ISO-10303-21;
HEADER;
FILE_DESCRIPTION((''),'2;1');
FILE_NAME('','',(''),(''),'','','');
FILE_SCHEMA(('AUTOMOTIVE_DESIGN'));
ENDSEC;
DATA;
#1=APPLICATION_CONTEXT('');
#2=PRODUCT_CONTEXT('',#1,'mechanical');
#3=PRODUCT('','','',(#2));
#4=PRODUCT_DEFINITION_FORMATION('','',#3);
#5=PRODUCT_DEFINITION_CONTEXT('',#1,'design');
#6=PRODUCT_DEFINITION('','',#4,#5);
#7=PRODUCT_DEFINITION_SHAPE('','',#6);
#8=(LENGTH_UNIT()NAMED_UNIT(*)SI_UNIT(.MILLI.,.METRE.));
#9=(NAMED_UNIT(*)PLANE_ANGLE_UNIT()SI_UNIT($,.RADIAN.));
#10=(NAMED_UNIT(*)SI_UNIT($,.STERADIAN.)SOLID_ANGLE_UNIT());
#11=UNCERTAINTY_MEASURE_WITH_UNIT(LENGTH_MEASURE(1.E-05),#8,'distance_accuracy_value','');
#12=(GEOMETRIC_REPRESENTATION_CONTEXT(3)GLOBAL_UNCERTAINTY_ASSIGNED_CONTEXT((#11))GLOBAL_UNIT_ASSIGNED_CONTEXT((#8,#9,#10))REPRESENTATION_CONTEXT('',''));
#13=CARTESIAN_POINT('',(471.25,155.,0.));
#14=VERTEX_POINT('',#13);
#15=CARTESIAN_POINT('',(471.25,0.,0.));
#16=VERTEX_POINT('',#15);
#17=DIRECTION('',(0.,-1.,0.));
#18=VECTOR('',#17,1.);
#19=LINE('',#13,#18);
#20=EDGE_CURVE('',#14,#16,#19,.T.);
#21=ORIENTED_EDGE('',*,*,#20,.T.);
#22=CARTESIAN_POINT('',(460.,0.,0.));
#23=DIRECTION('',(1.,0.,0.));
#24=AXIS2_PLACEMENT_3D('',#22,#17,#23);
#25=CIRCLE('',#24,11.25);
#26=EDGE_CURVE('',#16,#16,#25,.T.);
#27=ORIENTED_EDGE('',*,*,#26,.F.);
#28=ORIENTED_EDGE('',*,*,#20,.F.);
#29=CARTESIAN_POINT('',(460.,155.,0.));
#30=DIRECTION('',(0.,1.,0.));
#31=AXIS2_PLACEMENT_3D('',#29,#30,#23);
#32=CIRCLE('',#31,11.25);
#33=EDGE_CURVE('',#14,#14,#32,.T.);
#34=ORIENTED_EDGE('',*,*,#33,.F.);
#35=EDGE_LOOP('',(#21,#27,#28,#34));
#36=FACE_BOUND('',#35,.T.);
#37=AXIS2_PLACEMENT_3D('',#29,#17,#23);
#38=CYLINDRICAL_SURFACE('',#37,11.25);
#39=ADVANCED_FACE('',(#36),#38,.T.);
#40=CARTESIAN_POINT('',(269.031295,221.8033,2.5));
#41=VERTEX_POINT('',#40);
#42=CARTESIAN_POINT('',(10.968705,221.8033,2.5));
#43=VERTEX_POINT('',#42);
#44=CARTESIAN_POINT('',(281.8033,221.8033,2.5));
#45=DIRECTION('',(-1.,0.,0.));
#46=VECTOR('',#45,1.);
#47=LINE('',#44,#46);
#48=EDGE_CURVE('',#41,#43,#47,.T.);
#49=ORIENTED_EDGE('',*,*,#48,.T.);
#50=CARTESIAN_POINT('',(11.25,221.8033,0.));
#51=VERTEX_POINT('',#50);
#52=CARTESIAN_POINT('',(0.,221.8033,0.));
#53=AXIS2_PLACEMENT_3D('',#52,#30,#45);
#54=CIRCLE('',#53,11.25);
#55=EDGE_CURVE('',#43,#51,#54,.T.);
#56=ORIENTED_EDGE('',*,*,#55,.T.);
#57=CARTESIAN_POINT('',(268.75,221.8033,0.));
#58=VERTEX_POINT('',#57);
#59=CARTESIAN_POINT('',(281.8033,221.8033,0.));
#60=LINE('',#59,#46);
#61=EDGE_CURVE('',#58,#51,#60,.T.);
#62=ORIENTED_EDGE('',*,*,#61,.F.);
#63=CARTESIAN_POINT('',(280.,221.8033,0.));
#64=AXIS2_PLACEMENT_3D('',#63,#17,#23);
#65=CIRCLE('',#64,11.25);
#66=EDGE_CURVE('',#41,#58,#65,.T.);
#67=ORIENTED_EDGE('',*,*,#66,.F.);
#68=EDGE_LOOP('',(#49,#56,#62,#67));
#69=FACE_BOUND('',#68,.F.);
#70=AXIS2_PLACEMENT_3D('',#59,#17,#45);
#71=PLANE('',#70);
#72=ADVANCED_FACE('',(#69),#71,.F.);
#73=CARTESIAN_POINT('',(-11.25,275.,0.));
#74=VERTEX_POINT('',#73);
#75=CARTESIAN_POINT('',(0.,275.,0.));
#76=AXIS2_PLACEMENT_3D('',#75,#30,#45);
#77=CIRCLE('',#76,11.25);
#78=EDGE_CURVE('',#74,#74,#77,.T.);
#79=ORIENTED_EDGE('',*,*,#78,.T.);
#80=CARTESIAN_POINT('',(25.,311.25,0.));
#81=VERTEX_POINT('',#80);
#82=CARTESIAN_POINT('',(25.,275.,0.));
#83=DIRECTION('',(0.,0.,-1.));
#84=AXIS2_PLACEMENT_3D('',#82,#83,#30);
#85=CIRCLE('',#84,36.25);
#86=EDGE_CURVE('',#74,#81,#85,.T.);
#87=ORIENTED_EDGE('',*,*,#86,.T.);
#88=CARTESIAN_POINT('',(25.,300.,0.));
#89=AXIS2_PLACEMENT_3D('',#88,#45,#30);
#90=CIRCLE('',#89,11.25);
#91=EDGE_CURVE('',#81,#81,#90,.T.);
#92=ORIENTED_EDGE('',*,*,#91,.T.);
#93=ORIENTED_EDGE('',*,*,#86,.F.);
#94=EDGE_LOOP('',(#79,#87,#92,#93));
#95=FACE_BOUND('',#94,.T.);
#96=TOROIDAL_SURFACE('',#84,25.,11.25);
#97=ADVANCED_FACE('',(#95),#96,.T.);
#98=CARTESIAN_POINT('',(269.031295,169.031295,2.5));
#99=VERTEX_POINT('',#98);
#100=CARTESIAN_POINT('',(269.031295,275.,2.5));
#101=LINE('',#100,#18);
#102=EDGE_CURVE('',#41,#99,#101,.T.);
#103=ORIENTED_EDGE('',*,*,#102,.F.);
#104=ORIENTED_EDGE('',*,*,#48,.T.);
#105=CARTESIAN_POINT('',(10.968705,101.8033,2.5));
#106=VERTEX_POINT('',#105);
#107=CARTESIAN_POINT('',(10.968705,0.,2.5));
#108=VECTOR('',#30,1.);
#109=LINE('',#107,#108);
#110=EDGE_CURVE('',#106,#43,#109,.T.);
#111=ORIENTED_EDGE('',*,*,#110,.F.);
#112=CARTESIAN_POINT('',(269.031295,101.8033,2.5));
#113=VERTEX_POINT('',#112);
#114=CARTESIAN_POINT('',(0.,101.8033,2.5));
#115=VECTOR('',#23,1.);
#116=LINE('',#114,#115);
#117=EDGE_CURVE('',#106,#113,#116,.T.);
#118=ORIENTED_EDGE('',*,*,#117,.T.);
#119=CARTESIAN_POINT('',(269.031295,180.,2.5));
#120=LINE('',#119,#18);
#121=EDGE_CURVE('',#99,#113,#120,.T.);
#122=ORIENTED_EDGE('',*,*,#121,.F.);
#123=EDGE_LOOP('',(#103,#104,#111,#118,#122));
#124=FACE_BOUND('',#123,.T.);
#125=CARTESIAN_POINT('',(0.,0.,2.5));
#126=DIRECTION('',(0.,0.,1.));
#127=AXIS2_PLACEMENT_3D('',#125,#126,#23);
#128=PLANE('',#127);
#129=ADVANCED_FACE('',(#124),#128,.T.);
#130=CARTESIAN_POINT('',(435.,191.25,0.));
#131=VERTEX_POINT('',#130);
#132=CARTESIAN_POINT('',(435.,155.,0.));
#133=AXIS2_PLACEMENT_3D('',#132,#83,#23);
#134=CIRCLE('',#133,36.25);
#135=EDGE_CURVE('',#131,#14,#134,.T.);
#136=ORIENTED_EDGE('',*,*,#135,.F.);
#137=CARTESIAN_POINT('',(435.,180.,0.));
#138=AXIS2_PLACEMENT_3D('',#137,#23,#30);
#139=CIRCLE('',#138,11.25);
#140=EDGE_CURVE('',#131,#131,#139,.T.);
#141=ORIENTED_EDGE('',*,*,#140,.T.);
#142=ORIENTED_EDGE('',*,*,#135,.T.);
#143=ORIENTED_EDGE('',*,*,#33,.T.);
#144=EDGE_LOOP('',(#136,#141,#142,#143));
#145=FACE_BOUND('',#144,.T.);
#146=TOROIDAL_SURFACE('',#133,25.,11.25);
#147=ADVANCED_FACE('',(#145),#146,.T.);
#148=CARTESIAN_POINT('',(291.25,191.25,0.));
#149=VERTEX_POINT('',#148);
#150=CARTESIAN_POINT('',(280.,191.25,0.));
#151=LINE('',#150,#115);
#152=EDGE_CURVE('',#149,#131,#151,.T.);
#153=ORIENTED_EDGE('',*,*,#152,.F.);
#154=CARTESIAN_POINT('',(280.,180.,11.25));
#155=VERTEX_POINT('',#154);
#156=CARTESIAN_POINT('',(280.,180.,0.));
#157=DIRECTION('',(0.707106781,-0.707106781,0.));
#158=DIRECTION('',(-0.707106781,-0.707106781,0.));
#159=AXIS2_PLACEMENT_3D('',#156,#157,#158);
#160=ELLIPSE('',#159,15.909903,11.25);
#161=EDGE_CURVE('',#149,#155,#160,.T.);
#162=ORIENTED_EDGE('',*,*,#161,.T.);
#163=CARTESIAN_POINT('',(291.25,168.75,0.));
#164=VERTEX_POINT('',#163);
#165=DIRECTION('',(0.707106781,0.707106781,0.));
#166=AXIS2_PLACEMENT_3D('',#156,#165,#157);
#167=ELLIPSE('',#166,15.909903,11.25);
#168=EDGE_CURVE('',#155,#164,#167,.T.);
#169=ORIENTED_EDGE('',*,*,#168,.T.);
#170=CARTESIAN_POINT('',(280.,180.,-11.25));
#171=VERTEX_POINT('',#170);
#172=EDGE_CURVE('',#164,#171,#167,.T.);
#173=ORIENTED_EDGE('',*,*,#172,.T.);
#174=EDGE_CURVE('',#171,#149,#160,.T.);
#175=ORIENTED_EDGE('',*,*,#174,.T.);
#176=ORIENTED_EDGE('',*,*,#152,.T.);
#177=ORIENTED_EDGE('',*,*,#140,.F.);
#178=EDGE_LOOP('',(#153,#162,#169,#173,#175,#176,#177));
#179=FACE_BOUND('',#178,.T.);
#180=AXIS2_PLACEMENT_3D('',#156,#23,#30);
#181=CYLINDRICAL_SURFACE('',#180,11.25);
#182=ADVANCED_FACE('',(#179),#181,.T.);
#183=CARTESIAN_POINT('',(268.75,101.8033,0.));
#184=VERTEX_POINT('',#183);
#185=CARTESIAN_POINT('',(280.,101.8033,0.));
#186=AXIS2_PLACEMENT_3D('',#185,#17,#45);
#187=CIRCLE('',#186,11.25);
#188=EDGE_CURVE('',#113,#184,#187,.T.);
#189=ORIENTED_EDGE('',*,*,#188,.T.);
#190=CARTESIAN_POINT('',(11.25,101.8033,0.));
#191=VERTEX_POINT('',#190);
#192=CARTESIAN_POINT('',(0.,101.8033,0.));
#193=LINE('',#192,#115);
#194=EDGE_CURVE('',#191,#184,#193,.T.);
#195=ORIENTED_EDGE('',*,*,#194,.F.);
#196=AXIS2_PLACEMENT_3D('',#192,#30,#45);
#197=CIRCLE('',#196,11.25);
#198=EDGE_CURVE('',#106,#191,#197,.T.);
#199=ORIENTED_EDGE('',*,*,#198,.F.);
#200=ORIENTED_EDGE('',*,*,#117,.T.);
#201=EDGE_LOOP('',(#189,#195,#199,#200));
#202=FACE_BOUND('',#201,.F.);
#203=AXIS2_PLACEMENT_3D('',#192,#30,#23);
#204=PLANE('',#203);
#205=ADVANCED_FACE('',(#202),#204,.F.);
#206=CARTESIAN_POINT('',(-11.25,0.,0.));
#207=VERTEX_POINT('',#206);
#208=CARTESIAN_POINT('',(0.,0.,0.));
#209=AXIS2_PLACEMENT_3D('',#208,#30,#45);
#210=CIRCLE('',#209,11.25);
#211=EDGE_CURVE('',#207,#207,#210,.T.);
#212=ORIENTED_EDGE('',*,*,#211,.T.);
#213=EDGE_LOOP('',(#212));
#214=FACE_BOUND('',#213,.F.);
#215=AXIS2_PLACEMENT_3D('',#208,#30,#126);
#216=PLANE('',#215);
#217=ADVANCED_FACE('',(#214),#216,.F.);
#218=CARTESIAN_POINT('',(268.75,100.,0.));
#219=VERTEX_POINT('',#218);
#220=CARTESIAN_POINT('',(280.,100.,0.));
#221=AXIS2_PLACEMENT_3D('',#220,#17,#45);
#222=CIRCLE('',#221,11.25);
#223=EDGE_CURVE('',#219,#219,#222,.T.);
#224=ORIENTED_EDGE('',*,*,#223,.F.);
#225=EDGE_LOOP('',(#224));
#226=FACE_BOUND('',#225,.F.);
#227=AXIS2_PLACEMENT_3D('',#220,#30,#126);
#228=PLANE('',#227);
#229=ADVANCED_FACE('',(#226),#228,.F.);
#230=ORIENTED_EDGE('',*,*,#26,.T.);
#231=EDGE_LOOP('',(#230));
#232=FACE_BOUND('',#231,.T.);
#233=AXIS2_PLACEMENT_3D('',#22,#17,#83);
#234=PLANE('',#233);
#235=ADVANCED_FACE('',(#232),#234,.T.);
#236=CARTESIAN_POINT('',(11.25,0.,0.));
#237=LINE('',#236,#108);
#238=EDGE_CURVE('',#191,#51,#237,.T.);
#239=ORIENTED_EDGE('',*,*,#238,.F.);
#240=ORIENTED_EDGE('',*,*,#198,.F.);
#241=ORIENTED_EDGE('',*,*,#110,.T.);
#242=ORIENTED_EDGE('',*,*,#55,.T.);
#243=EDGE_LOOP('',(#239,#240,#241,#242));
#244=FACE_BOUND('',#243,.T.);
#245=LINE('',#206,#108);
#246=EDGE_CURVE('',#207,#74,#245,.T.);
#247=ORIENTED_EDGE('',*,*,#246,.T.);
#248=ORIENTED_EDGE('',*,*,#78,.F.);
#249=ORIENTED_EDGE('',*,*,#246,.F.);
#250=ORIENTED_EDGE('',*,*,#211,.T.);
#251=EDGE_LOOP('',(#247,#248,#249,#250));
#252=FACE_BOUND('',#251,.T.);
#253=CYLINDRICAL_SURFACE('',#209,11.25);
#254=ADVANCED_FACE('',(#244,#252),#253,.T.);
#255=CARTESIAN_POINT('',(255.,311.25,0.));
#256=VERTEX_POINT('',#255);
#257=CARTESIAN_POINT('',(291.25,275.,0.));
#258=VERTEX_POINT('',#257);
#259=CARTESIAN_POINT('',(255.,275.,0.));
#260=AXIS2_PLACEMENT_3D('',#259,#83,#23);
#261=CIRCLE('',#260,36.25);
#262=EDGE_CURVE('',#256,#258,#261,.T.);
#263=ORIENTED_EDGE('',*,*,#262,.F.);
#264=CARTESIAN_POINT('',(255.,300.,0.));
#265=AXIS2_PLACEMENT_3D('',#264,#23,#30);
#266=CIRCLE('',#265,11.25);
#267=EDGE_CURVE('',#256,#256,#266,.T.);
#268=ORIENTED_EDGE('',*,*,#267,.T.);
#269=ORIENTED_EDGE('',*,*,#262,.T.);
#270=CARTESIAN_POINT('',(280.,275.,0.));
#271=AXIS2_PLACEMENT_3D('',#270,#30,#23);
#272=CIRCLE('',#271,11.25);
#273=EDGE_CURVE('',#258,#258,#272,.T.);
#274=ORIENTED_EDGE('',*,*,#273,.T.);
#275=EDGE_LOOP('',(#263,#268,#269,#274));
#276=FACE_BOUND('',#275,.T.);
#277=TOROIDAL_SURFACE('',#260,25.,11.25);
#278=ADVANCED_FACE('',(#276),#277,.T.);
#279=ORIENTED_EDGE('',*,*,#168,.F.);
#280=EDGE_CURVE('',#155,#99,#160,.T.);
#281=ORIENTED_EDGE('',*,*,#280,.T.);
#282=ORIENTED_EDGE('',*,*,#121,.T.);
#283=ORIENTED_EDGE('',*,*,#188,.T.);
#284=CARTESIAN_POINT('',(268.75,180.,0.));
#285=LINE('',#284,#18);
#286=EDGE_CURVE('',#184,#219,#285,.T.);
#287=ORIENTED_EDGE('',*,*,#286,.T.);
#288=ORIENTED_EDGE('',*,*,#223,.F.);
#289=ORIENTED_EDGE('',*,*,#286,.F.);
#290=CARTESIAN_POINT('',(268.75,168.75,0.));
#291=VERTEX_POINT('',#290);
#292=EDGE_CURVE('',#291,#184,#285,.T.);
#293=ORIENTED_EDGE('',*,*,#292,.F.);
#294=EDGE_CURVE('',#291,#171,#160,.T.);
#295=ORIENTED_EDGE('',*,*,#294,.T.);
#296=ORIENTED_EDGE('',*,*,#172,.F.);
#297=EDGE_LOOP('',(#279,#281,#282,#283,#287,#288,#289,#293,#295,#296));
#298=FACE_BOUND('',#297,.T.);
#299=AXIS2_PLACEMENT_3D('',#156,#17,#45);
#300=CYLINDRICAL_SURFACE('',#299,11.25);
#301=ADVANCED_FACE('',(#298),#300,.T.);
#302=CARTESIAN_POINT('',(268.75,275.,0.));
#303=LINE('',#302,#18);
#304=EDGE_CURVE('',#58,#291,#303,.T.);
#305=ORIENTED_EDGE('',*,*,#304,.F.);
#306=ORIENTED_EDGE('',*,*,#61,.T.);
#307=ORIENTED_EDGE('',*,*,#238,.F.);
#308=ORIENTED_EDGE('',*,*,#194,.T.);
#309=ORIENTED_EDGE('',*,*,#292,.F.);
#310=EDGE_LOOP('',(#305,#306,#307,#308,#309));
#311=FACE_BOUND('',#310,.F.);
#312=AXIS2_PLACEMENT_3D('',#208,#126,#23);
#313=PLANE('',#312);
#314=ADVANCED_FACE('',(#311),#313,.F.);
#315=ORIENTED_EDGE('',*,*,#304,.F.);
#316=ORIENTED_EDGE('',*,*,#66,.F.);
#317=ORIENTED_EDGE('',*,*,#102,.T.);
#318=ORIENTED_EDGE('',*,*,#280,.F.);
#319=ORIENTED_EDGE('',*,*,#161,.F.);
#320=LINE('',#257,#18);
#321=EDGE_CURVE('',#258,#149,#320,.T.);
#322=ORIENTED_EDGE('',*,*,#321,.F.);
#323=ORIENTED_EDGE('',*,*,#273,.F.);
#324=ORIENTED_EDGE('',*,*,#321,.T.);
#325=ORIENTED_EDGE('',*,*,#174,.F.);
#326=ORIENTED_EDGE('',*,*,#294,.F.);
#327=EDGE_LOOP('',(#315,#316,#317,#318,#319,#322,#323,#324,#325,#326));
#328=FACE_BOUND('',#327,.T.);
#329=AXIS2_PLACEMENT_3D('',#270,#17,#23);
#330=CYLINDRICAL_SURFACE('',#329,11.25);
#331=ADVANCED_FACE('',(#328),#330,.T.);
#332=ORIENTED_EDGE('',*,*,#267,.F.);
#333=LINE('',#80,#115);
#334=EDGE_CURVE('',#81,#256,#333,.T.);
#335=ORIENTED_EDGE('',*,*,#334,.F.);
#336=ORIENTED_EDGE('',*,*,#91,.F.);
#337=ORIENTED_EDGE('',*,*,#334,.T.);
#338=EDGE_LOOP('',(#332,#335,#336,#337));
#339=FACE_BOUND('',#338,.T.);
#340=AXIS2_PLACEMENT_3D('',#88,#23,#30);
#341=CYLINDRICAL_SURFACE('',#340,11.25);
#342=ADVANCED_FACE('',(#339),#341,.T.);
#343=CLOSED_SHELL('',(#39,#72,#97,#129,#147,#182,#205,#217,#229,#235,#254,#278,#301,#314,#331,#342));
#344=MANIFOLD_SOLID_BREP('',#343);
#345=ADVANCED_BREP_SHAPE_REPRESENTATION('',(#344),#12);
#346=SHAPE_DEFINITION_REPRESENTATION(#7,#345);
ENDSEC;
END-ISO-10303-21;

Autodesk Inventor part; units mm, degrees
ref_plane "YZ Plane" through (0, 0, 0) normal (1, 0, 0) x (0, 1, 0)
ref_plane "XY Plane" through (0, 0, 0) normal (0, 0, 1) x (1, 0, 0)
sketch "Sketch1" plane through (0, 0, 0) normal (0, 0, 1) x (1, 0, 0)
  line L0 (0, 0) -> (0, 275)
  line L1 (25, 300) -> (255, 300)
  line L2 (280, 275) -> (280, 180)
  line L3 (280, 180) -> (435, 180)
  line L4 (460, 155) -> (460, 0)
  arc A0 (25, 300) -> (0, 275) centre (25, 275) ccw
  arc A1 (280, 275) -> (255, 300) centre (255, 275) ccw
  arc A2 (460, 155) -> (435, 180) centre (435, 155) ccw
  line L5 (280, 180) -> (280, 93.2639)
  point P0 (0, 300)
  point P1 (280, 300)
  point P2 (460, 180)
  dimension "d0" = 300
  dimension "d1" = 280
  dimension "d2" = 120
  dimension "d3" = 180
  dimension "d4" = 25
  dimension "d5" = 25
  dimension "d6" = 25
  dimension "d7" = 86.7361
sketch "Sketch2" plane through (0, 0, 0) normal (0, 1, 0) x (-1, 0, 0)
  circle A0 centre (0, 0) radius 11.25
  dimension "d8" = 22.5
sweep "Sweep1" add profiles "Sketch2" path "Sketch1" path curves L0 A0 L1 A1 L2 L3 A2 L4
sketch "Sketch3" plane through (0, 0, 0) normal (0, 1, 0) x (-1, 0, 0)
  point P0 (0, 0)
sketch "Sketch4" plane through (0, 0, 0) normal (0, 0, 1) x (1, 0, 0)
  line L0 (280, 180) -> (280, 180) projected
  line L1 (280, 180) -> (280, 100)
  point P0 (0, 0)
  dimension "d11" = 80
ref_plane "Work Plane1" through (0, 100, 0) normal (0, 1, 0) x (-1, 0, 0)
sketch "Sketch5" plane through (0, 100, 0) normal (0, 1, 0) x (-1, 0, 0)
  circle A0 centre (-280, 0) radius 11.25 projected
  circle A1 centre (-280, 0) radius 11.25
  point P0 (0, 0)
  dimension "d13" = 22.5
sweep "Sweep2" add profiles "Sketch5" path "Sketch4" path curves L1
sketch "Sketch6" plane through (0, 0, 0) normal (0, 0, 1) x (1, 0, 0)
  line L0 (0, 101.8033) -> (281.8033, 101.8033)
  line L1 (281.8033, 101.8033) -> (281.8033, 221.8033)
  line L2 (281.8033, 221.8033) -> (0, 221.8033)
  line L3 (0, 221.8033) -> (0, 101.8033)
  point P0 (0, 0)
  dimension "d16" = 120
extrude "Extrusion1" add sketch "Sketch6" along normal blind 2.5
properties part number "frame of armrest"
